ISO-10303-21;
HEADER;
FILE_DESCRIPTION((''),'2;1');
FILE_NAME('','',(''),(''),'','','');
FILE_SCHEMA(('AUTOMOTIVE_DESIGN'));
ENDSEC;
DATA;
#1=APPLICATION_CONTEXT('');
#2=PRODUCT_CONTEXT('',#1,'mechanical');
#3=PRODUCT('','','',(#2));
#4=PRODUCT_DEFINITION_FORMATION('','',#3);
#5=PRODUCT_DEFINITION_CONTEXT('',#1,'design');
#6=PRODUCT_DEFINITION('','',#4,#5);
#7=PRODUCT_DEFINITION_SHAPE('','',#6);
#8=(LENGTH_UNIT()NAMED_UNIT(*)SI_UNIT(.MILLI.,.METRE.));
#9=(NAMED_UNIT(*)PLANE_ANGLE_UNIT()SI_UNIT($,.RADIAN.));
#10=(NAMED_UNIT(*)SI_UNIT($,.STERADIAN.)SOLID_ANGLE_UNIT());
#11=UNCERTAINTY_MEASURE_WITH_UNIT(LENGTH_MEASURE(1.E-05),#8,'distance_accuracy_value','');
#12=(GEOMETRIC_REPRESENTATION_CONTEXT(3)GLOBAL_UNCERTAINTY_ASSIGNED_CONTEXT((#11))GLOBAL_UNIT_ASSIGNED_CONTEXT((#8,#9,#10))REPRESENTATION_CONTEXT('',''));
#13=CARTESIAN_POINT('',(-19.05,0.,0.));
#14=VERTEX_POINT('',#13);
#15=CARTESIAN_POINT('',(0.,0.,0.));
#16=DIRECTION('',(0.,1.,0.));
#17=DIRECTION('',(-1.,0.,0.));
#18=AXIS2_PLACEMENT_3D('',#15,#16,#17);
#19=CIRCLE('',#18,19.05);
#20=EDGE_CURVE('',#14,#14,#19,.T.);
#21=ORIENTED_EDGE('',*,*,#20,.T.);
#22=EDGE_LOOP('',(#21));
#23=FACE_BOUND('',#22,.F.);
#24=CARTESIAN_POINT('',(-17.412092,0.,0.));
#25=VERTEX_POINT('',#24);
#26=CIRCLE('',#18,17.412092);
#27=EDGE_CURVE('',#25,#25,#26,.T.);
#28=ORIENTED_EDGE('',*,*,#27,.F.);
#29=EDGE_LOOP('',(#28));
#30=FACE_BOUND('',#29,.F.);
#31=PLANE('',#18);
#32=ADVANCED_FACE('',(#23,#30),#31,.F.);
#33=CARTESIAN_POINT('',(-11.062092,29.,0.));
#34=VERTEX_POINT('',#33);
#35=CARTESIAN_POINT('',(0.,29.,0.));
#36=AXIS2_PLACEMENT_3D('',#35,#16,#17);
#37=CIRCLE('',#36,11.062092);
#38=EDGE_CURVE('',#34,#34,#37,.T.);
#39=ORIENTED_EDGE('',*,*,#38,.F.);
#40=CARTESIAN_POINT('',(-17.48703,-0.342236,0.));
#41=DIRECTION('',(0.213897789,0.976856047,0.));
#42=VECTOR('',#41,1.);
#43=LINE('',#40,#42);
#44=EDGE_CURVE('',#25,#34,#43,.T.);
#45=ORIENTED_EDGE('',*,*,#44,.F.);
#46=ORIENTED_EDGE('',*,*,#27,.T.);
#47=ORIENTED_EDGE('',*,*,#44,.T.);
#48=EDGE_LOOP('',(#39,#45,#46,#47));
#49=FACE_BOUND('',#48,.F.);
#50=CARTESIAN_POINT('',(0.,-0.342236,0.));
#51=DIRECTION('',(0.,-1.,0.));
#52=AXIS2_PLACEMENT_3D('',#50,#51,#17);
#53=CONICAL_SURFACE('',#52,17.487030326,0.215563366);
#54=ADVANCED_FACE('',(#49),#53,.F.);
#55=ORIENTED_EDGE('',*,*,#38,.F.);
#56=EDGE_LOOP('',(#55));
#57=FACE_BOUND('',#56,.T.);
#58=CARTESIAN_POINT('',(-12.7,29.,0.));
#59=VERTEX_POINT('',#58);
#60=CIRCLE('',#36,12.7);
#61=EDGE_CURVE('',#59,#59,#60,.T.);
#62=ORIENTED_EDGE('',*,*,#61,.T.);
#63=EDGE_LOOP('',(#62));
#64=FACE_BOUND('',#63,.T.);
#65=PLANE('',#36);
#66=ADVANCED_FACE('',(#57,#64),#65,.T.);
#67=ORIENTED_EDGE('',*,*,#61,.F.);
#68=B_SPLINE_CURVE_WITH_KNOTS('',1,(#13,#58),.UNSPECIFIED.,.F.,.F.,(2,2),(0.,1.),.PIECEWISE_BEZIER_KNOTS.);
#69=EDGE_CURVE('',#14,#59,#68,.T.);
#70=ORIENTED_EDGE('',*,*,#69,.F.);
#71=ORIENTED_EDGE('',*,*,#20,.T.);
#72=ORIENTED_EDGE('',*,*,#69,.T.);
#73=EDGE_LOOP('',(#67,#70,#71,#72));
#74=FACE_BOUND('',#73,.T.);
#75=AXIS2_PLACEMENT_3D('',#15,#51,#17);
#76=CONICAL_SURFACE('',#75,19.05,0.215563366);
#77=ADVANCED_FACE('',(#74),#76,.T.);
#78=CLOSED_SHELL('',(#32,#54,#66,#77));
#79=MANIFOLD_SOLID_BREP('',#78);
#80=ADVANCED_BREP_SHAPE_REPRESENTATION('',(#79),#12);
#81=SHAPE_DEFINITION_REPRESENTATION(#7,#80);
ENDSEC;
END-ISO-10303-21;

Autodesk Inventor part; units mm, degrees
ref_plane "YZ Plane" through (0, 0, 0) normal (1, 0, 0) x (0, 1, 0)
ref_plane "XY Plane" through (0, 0, 0) normal (0, 0, 1) x (1, 0, 0)
sketch "Szkic6" plane through (0, 0, 0) normal (0, 1, 0) x (-1, 0, 0)
  circle A0 centre (0, 0) radius 19.05
  dimension "d33" = 38.1
ref_plane "Płaszczyzna konstrukcyjna1" through (0, 29, 0) normal (0, 1, 0) x (-1, 0, 0)
sketch "Szkic7" plane through (0, 29, 0) normal (0, 1, 0) x (-1, 0, 0)
  circle A0 centre (0, 0) radius 12.7
  dimension "d35" = 25.4
loft "Wyciągnięcie złożone1" add profiles "Szkic6", "Szkic7"
shell "Skorupa1" thickness 1.6 removed faces 2 at (3.6254, 29, -0.9542) at (5.6226, 0, 0.0883)
equation "\"d33\" = OD1"
equation "\"d35\" = OD2"
equation "\"d52\" = THK"
equation "\"SzerokośćGięciaPodcięcia\" = Grubość"
equation "\"RozmiarPodcięciaNarożnika\" = 4 * Grubość"
equation "\"PromieńPrzejścia\" = PromieńGięcia"
equation "\"Rozmiar_promienia_Jacobiego\" = PromieńGięcia"
equation "\"Wielk_odstępu\" = Grubość"
equation "\"d2\" = PromieńGięcia"
equation "\"d23\" = PromieńGięcia"
equation "\"OD1\" = 38.1"
equation "\"OD2\" = 25.4"
equation "\"L\" = 29"
equation "\"THK\" = 1.6"
equation "\"d34\" = L"
equation "\"Grubość\" = 1.5"
equation "\"PromieńGięcia\" = 3"
properties part number "Redukcja symetryczna Ø38,1x25,4x1,6 L=29" material "304"
